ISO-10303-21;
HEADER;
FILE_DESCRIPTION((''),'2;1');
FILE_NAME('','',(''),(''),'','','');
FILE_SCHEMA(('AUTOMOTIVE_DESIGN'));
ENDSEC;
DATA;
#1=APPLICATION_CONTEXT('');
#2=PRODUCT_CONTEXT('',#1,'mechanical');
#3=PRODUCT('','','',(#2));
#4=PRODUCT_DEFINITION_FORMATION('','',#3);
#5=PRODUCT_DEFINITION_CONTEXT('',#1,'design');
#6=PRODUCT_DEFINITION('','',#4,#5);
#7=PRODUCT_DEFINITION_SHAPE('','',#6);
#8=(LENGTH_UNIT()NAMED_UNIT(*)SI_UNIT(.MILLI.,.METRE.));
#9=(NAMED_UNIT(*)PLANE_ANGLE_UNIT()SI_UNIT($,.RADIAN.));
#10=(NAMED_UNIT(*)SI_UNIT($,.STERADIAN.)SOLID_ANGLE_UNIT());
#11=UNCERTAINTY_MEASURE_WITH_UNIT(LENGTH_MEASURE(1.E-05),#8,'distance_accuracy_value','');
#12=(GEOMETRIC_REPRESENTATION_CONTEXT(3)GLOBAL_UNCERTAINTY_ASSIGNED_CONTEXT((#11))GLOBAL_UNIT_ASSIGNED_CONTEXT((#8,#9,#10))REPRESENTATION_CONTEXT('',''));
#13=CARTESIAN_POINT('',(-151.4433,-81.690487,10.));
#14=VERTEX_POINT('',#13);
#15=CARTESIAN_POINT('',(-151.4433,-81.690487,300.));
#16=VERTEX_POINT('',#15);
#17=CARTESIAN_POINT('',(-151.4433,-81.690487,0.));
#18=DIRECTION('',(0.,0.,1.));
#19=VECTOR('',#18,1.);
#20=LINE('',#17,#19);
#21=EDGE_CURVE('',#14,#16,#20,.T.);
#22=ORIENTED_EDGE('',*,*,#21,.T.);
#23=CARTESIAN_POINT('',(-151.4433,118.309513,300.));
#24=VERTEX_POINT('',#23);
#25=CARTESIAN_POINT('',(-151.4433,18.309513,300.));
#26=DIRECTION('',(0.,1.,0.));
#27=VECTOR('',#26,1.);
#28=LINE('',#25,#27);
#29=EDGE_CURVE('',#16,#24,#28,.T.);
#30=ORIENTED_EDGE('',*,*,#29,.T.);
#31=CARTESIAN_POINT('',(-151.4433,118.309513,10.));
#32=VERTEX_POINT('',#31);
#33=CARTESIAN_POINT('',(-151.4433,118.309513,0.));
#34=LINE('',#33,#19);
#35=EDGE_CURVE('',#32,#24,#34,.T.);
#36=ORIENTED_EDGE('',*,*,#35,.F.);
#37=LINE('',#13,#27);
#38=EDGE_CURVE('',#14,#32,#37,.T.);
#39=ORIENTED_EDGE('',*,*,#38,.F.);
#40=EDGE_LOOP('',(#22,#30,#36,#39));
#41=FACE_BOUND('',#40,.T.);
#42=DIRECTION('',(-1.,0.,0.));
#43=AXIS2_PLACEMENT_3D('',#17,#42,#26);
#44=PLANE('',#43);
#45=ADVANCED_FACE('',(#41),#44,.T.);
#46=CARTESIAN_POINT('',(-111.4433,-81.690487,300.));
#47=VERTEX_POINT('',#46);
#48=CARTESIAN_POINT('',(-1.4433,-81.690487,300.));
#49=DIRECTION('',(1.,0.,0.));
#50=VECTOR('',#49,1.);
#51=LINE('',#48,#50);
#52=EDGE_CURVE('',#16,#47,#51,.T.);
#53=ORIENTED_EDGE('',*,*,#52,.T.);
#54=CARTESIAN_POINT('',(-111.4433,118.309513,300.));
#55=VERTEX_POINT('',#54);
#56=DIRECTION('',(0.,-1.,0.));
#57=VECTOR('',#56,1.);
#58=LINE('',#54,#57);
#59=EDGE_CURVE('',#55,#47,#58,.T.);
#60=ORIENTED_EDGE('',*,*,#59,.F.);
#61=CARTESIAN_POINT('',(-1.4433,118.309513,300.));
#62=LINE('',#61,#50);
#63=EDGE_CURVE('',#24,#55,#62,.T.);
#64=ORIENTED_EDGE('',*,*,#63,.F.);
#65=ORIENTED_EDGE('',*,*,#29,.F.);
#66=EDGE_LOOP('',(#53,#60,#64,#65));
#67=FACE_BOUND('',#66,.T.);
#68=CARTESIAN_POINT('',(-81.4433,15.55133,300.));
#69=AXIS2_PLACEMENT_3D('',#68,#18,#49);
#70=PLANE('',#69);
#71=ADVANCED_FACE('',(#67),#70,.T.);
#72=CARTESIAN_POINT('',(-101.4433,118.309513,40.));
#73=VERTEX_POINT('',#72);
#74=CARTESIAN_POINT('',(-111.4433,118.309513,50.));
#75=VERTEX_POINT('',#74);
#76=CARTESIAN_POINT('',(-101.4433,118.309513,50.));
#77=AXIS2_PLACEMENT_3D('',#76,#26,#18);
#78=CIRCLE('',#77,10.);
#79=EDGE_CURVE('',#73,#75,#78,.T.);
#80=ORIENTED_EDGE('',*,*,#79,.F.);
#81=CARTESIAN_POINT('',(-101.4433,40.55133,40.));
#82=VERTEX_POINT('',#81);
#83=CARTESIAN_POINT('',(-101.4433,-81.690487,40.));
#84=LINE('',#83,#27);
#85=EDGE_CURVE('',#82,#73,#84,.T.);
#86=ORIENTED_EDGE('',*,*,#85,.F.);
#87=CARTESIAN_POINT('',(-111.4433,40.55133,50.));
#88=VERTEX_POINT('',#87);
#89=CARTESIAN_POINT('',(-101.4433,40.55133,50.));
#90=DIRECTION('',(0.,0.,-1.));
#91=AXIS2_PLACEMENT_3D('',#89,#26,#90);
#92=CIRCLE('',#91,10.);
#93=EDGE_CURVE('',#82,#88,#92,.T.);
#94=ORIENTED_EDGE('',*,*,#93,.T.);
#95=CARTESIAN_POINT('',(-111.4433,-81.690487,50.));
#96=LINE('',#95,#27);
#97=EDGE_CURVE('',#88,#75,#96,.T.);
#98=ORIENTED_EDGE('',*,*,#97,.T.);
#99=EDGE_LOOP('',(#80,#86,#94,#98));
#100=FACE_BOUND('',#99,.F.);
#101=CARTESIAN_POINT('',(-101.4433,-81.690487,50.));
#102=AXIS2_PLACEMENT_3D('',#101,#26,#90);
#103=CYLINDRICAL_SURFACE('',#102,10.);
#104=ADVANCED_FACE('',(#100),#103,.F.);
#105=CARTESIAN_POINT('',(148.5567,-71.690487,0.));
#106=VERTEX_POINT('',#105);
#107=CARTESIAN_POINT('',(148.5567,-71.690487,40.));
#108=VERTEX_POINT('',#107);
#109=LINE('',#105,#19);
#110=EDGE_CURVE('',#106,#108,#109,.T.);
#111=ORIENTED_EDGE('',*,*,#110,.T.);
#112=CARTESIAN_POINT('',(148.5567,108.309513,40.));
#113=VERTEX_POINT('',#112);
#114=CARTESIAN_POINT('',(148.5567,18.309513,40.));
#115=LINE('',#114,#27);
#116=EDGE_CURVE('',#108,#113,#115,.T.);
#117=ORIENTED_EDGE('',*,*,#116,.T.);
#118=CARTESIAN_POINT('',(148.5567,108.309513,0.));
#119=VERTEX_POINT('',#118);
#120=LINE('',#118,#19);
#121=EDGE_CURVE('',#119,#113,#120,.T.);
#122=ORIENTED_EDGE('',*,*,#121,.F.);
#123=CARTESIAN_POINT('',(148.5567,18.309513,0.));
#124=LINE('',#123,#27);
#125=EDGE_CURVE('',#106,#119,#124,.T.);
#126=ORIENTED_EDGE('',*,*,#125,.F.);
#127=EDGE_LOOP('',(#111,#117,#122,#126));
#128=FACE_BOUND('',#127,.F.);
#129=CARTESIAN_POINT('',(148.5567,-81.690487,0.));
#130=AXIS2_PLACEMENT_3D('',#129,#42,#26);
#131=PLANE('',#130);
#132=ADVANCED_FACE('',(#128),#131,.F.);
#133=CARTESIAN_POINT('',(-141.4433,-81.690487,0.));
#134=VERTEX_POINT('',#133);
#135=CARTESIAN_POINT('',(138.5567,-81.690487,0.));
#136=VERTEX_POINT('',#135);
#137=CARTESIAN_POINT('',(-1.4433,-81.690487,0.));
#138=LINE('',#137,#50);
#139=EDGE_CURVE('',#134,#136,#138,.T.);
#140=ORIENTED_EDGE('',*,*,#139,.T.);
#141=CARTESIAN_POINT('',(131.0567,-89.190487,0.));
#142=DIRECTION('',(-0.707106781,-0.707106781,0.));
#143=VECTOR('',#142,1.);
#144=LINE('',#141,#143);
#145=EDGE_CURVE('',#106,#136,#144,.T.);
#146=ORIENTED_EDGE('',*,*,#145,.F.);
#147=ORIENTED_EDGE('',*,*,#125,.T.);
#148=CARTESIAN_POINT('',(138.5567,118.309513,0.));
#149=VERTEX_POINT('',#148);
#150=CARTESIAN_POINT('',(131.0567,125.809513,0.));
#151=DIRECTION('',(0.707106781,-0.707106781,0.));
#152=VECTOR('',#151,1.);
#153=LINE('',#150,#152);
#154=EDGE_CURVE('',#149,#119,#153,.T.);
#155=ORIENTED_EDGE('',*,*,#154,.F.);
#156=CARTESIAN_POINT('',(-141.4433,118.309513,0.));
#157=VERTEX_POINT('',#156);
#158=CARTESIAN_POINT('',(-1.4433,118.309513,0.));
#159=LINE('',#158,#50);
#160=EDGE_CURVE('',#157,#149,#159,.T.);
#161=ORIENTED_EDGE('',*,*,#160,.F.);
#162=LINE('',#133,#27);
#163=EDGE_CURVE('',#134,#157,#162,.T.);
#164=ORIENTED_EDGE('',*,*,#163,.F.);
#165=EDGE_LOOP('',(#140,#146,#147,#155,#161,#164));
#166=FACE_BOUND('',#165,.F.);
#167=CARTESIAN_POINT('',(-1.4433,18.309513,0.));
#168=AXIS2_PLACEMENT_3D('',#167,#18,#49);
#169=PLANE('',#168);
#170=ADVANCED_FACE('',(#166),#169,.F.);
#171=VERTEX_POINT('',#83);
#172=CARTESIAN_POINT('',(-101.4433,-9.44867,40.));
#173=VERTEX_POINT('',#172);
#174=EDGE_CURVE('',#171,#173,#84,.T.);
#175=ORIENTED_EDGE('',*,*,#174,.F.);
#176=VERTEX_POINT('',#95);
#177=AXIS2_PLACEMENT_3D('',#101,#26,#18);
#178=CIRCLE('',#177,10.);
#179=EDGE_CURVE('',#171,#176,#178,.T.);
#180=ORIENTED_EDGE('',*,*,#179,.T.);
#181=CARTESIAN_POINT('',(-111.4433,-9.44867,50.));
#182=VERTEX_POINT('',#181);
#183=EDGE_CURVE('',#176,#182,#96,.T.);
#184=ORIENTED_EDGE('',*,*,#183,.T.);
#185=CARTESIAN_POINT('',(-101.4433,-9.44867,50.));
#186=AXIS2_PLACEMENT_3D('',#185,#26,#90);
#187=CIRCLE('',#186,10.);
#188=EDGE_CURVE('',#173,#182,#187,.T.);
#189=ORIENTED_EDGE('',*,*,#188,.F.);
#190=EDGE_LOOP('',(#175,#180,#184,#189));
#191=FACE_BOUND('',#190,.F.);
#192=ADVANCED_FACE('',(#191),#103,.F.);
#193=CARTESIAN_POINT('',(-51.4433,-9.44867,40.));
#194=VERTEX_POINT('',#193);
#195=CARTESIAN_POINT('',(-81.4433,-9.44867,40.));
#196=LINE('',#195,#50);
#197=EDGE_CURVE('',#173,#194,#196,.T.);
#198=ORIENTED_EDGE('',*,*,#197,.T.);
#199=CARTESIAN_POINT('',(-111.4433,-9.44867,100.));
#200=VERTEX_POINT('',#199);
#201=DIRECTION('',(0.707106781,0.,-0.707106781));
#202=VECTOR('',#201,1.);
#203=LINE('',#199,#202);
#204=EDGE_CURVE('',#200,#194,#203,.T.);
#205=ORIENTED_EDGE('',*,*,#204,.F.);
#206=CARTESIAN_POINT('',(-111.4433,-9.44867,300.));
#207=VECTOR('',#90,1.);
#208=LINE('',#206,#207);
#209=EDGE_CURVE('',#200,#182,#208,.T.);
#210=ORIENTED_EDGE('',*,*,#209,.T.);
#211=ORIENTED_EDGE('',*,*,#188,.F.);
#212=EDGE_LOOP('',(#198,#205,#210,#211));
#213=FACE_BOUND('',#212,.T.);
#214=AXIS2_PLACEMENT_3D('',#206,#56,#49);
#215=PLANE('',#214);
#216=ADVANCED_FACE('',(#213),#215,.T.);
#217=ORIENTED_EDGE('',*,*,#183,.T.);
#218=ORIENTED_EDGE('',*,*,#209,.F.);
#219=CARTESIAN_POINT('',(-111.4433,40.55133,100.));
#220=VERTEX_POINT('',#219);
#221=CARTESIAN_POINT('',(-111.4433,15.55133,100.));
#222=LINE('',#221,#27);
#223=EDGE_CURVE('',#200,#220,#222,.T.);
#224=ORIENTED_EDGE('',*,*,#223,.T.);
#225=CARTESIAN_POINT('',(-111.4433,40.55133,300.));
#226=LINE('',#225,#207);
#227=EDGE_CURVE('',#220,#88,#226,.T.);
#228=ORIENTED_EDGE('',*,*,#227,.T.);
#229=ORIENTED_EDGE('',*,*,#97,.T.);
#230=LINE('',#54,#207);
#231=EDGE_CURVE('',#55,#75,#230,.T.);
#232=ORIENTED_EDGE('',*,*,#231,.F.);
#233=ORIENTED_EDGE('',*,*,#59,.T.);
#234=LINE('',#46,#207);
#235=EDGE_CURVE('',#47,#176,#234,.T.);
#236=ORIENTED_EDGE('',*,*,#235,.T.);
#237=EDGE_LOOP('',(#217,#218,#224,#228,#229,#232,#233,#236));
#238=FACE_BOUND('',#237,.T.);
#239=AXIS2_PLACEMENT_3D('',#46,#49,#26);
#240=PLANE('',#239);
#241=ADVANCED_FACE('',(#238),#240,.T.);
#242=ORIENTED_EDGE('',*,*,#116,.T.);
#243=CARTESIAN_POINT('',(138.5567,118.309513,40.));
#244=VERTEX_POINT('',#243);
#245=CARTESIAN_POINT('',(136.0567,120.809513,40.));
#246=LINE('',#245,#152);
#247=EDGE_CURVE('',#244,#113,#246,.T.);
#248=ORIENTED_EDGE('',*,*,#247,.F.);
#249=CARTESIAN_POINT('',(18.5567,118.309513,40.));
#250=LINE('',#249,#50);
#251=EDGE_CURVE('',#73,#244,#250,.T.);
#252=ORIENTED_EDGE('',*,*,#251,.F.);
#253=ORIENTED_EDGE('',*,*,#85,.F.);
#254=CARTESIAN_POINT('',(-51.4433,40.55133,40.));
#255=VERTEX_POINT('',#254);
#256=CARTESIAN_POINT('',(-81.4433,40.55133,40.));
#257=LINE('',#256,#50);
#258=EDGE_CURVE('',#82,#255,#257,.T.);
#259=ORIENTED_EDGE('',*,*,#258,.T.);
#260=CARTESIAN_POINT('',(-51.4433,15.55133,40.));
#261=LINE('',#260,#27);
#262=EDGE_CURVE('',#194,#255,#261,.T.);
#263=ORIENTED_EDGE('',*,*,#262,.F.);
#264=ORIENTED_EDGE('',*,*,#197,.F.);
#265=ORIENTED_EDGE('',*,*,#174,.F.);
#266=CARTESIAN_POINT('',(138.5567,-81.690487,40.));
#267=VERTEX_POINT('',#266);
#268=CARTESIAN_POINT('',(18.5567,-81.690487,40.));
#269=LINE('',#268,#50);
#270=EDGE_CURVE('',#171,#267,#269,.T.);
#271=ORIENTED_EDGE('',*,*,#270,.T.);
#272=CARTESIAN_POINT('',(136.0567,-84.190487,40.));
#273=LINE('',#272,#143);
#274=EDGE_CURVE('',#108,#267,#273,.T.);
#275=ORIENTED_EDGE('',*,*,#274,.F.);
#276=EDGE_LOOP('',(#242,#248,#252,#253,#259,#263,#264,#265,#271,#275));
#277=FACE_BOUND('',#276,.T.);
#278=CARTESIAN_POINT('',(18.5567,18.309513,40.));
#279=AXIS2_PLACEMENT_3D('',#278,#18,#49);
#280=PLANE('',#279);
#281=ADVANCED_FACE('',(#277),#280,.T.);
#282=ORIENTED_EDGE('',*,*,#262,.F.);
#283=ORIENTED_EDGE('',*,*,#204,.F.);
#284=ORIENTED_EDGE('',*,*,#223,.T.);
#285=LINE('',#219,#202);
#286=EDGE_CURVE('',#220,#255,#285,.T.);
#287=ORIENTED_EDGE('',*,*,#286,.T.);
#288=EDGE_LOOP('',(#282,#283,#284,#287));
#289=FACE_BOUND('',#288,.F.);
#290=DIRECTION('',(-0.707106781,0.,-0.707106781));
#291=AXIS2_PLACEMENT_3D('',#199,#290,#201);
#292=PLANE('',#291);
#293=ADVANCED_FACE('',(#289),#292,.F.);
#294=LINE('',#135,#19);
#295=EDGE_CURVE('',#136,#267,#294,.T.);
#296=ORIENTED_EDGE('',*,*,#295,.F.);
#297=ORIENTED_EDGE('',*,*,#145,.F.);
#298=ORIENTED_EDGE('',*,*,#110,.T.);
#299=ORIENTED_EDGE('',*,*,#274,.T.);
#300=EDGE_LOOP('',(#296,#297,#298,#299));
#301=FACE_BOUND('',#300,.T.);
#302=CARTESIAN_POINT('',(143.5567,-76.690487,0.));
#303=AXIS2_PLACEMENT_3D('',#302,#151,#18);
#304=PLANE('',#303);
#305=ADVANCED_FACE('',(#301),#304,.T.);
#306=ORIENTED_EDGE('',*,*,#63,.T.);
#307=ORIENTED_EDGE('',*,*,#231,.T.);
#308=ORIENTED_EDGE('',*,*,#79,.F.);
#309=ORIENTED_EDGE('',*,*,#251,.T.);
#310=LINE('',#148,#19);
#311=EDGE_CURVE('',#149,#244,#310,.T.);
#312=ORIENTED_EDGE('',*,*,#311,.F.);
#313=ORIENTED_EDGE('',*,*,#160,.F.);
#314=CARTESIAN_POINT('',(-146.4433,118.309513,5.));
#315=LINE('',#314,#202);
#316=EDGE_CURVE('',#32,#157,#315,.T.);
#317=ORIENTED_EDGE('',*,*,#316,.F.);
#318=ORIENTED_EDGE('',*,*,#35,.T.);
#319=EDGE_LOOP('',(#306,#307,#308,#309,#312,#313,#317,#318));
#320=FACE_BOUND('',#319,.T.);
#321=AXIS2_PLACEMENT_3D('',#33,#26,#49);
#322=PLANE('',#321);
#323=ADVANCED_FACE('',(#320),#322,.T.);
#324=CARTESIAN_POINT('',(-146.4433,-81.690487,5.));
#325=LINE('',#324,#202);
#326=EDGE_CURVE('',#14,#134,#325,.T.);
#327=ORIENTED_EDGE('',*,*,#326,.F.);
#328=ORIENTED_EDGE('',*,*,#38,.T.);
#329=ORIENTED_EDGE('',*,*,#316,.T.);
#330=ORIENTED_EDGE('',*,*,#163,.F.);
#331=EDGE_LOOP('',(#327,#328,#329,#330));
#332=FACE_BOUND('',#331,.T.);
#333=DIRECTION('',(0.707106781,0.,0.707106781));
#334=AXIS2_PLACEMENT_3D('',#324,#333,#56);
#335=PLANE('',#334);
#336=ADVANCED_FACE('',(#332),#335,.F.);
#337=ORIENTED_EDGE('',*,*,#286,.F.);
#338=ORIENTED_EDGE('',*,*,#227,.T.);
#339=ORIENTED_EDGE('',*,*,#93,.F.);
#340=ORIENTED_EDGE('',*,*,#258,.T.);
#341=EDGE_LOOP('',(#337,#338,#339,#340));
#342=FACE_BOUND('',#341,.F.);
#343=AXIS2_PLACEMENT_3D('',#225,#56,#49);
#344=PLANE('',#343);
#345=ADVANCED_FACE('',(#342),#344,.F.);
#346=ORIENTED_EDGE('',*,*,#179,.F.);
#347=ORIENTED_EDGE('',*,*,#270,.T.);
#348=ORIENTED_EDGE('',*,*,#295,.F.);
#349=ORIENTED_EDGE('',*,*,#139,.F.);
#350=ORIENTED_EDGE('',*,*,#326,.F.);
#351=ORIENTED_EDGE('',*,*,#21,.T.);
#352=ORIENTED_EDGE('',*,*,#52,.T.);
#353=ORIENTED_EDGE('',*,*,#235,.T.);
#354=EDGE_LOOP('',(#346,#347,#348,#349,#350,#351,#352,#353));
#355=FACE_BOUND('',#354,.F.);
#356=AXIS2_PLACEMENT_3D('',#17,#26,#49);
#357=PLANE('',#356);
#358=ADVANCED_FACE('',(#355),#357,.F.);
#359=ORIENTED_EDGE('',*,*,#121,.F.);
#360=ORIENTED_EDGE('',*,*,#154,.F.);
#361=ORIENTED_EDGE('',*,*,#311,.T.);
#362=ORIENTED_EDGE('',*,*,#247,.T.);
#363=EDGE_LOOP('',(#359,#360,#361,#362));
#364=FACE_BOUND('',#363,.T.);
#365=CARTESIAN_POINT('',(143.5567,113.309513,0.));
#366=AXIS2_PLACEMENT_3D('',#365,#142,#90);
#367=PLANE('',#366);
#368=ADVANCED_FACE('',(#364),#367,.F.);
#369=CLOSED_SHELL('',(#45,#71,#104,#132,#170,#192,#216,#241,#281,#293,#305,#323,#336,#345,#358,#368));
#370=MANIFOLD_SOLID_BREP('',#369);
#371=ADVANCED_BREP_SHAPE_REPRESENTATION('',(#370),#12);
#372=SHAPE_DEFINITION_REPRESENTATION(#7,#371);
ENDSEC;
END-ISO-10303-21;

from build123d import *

# Parameters (mm, degrees)
F0_W      = 300
F0_H      = 200
F1_DEPTH  = 300
F2_W      = 260
F2_H      = 200
F3_DEPTH  = 260
F4_R      = 10
F5_W      = 60
F5_H      = 50
F6_DEPTH  = 260
F7_SIZE   = 10
F8_W      = 60
F8_H      = 50
F9_DEPTH  = 200
F11_DEPTH = 50


# Not quite as in the source:
# - a feature names something its author has since deleted; it is built from what else it names


with BuildPart() as f1:
    # F0 (on Top) → F1 (new body)
    with BuildSketch(Plane.XY):
        with Locations((-1.4433003962, 18.309512734)):
            Rectangle(F0_W, F0_H)
    extrude(amount=F1_DEPTH)

    # F2 (on face) → F3 (cut)
    with BuildSketch(Plane.XY.offset(300)):
        with Locations((18.5566996038, 18.309512734)):
            Rectangle(F2_W, F2_H)
    extrude(amount=-F3_DEPTH, mode=Mode.SUBTRACT)

    # F4
    f4_edges = [f1.edges().sort_by_distance(p)[0] for p in [
        (-111.4433, 18.309513, 40),
    ]]
    fillet(f4_edges, radius=F4_R)

    # F5 (on face) → F6 (join)
    with BuildSketch(Plane.XY.offset(300)):
        with Locations((-81.4433003962, 15.5513301492)):
            Rectangle(F5_W, F5_H)
    extrude(amount=-F6_DEPTH)

    # F7
    f7_edges = [f1.edges().sort_by_distance(p)[0] for p in [
        (-151.4433, 18.309513, 0),
        (148.5567, -81.690487, 20),
        (148.5567, 118.309513, 20),
    ]]
    chamfer(f7_edges, length=F7_SIZE)

    # F8 (on face) → F9 (cut)
    with BuildSketch(Plane.XY.offset(300)):
        with Locations((-81.4433003962, 15.5513301492)):
            Rectangle(F8_W, F8_H)
    extrude(amount=-F9_DEPTH, mode=Mode.SUBTRACT)

    # F10 (on face) → F11 (cut)
    with BuildSketch(Plane.XZ.offset(9.4486698508)):
        Polygon((-51.4433003962, 100), (-111.4433003962, 100), (-51.4433003962, 40), align=None)
    extrude(amount=-F11_DEPTH, mode=Mode.SUBTRACT)


solid = f1.part
